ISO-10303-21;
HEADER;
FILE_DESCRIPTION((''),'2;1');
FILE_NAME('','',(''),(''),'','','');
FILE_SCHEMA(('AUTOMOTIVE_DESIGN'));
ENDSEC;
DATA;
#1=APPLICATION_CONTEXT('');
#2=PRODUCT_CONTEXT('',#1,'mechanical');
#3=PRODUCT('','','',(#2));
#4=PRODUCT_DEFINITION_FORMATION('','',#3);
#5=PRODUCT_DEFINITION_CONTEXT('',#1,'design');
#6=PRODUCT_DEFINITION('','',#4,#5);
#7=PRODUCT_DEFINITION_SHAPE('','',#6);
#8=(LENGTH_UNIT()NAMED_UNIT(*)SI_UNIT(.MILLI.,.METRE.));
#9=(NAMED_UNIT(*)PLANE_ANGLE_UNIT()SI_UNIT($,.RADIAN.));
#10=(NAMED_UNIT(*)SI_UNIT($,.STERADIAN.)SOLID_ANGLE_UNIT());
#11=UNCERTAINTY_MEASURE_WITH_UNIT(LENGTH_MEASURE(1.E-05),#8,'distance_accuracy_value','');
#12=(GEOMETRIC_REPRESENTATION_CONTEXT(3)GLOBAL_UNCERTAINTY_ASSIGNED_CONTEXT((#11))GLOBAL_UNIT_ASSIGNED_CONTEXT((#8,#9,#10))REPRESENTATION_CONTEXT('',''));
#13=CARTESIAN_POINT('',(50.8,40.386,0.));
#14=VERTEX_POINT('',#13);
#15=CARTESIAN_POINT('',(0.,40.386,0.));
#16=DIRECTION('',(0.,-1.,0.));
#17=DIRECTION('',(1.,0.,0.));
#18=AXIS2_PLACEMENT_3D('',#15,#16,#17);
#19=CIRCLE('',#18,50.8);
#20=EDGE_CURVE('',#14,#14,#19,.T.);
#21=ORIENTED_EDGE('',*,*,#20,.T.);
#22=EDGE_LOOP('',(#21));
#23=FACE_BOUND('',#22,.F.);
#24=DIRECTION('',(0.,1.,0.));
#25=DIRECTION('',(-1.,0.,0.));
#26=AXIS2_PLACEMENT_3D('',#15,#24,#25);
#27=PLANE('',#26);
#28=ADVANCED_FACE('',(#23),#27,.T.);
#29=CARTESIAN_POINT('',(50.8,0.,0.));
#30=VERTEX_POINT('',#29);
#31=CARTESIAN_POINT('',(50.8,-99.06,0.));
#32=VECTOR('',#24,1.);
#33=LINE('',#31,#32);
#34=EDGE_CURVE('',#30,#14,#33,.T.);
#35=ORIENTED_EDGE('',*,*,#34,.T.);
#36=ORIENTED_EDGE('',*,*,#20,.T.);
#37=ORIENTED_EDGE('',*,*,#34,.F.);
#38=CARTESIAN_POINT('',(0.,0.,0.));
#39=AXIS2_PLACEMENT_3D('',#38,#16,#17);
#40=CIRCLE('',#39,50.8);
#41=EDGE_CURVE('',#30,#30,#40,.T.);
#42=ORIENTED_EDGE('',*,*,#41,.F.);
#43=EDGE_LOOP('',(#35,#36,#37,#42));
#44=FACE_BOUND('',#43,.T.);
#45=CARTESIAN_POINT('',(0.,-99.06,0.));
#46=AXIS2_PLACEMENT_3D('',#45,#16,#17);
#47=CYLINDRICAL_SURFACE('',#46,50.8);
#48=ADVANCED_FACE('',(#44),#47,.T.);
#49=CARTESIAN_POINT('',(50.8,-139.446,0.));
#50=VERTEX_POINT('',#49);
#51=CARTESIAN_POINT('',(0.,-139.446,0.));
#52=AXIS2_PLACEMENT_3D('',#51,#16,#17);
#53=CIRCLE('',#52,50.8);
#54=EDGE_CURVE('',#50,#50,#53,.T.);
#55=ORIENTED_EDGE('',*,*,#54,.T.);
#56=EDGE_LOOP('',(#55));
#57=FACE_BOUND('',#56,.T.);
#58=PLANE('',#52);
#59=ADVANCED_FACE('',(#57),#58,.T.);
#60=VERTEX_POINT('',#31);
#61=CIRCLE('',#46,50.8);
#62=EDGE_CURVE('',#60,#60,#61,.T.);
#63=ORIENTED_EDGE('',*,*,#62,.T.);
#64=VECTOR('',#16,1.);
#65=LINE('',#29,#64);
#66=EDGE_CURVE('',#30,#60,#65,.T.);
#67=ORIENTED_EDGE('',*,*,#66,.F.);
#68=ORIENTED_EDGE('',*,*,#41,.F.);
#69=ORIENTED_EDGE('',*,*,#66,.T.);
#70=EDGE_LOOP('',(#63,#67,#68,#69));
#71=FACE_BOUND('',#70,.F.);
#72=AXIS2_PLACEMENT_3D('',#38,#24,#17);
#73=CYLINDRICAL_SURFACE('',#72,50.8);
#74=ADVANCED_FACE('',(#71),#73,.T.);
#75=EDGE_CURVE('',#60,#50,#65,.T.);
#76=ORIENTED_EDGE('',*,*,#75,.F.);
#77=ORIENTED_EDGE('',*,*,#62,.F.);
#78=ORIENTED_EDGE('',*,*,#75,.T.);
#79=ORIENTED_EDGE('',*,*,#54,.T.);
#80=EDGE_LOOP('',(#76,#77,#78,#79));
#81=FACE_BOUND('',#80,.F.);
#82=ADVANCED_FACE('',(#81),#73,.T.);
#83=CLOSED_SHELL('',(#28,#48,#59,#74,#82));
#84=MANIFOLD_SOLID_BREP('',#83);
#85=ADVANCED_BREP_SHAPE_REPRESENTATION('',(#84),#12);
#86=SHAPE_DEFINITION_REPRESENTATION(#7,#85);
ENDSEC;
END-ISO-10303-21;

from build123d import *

# Parameters (mm, degrees)
F0_R     = 50.8
F1_DEPTH = 139.446


# Not quite as in the source:
# - a feature of the source that left no trace in its solid (it failed there, or was rolled back) is left out
# - a pattern or mirror of a feature is missing from the dataset's text; its kind, count and spacing are read off the source's solid


with BuildPart() as f1:
    # F0 (on Front) → F1 (new body)
    with BuildSketch(Plane.XZ):
        Circle(F0_R)
    extrude(amount=F1_DEPTH)

    # F1_copies: F1 across plane


with BuildPart() as f1_1:
    add(f1.part)
    add(f1.part.mirror(Plane.ZX.offset(-49.53)))


solid = f1_1.part
